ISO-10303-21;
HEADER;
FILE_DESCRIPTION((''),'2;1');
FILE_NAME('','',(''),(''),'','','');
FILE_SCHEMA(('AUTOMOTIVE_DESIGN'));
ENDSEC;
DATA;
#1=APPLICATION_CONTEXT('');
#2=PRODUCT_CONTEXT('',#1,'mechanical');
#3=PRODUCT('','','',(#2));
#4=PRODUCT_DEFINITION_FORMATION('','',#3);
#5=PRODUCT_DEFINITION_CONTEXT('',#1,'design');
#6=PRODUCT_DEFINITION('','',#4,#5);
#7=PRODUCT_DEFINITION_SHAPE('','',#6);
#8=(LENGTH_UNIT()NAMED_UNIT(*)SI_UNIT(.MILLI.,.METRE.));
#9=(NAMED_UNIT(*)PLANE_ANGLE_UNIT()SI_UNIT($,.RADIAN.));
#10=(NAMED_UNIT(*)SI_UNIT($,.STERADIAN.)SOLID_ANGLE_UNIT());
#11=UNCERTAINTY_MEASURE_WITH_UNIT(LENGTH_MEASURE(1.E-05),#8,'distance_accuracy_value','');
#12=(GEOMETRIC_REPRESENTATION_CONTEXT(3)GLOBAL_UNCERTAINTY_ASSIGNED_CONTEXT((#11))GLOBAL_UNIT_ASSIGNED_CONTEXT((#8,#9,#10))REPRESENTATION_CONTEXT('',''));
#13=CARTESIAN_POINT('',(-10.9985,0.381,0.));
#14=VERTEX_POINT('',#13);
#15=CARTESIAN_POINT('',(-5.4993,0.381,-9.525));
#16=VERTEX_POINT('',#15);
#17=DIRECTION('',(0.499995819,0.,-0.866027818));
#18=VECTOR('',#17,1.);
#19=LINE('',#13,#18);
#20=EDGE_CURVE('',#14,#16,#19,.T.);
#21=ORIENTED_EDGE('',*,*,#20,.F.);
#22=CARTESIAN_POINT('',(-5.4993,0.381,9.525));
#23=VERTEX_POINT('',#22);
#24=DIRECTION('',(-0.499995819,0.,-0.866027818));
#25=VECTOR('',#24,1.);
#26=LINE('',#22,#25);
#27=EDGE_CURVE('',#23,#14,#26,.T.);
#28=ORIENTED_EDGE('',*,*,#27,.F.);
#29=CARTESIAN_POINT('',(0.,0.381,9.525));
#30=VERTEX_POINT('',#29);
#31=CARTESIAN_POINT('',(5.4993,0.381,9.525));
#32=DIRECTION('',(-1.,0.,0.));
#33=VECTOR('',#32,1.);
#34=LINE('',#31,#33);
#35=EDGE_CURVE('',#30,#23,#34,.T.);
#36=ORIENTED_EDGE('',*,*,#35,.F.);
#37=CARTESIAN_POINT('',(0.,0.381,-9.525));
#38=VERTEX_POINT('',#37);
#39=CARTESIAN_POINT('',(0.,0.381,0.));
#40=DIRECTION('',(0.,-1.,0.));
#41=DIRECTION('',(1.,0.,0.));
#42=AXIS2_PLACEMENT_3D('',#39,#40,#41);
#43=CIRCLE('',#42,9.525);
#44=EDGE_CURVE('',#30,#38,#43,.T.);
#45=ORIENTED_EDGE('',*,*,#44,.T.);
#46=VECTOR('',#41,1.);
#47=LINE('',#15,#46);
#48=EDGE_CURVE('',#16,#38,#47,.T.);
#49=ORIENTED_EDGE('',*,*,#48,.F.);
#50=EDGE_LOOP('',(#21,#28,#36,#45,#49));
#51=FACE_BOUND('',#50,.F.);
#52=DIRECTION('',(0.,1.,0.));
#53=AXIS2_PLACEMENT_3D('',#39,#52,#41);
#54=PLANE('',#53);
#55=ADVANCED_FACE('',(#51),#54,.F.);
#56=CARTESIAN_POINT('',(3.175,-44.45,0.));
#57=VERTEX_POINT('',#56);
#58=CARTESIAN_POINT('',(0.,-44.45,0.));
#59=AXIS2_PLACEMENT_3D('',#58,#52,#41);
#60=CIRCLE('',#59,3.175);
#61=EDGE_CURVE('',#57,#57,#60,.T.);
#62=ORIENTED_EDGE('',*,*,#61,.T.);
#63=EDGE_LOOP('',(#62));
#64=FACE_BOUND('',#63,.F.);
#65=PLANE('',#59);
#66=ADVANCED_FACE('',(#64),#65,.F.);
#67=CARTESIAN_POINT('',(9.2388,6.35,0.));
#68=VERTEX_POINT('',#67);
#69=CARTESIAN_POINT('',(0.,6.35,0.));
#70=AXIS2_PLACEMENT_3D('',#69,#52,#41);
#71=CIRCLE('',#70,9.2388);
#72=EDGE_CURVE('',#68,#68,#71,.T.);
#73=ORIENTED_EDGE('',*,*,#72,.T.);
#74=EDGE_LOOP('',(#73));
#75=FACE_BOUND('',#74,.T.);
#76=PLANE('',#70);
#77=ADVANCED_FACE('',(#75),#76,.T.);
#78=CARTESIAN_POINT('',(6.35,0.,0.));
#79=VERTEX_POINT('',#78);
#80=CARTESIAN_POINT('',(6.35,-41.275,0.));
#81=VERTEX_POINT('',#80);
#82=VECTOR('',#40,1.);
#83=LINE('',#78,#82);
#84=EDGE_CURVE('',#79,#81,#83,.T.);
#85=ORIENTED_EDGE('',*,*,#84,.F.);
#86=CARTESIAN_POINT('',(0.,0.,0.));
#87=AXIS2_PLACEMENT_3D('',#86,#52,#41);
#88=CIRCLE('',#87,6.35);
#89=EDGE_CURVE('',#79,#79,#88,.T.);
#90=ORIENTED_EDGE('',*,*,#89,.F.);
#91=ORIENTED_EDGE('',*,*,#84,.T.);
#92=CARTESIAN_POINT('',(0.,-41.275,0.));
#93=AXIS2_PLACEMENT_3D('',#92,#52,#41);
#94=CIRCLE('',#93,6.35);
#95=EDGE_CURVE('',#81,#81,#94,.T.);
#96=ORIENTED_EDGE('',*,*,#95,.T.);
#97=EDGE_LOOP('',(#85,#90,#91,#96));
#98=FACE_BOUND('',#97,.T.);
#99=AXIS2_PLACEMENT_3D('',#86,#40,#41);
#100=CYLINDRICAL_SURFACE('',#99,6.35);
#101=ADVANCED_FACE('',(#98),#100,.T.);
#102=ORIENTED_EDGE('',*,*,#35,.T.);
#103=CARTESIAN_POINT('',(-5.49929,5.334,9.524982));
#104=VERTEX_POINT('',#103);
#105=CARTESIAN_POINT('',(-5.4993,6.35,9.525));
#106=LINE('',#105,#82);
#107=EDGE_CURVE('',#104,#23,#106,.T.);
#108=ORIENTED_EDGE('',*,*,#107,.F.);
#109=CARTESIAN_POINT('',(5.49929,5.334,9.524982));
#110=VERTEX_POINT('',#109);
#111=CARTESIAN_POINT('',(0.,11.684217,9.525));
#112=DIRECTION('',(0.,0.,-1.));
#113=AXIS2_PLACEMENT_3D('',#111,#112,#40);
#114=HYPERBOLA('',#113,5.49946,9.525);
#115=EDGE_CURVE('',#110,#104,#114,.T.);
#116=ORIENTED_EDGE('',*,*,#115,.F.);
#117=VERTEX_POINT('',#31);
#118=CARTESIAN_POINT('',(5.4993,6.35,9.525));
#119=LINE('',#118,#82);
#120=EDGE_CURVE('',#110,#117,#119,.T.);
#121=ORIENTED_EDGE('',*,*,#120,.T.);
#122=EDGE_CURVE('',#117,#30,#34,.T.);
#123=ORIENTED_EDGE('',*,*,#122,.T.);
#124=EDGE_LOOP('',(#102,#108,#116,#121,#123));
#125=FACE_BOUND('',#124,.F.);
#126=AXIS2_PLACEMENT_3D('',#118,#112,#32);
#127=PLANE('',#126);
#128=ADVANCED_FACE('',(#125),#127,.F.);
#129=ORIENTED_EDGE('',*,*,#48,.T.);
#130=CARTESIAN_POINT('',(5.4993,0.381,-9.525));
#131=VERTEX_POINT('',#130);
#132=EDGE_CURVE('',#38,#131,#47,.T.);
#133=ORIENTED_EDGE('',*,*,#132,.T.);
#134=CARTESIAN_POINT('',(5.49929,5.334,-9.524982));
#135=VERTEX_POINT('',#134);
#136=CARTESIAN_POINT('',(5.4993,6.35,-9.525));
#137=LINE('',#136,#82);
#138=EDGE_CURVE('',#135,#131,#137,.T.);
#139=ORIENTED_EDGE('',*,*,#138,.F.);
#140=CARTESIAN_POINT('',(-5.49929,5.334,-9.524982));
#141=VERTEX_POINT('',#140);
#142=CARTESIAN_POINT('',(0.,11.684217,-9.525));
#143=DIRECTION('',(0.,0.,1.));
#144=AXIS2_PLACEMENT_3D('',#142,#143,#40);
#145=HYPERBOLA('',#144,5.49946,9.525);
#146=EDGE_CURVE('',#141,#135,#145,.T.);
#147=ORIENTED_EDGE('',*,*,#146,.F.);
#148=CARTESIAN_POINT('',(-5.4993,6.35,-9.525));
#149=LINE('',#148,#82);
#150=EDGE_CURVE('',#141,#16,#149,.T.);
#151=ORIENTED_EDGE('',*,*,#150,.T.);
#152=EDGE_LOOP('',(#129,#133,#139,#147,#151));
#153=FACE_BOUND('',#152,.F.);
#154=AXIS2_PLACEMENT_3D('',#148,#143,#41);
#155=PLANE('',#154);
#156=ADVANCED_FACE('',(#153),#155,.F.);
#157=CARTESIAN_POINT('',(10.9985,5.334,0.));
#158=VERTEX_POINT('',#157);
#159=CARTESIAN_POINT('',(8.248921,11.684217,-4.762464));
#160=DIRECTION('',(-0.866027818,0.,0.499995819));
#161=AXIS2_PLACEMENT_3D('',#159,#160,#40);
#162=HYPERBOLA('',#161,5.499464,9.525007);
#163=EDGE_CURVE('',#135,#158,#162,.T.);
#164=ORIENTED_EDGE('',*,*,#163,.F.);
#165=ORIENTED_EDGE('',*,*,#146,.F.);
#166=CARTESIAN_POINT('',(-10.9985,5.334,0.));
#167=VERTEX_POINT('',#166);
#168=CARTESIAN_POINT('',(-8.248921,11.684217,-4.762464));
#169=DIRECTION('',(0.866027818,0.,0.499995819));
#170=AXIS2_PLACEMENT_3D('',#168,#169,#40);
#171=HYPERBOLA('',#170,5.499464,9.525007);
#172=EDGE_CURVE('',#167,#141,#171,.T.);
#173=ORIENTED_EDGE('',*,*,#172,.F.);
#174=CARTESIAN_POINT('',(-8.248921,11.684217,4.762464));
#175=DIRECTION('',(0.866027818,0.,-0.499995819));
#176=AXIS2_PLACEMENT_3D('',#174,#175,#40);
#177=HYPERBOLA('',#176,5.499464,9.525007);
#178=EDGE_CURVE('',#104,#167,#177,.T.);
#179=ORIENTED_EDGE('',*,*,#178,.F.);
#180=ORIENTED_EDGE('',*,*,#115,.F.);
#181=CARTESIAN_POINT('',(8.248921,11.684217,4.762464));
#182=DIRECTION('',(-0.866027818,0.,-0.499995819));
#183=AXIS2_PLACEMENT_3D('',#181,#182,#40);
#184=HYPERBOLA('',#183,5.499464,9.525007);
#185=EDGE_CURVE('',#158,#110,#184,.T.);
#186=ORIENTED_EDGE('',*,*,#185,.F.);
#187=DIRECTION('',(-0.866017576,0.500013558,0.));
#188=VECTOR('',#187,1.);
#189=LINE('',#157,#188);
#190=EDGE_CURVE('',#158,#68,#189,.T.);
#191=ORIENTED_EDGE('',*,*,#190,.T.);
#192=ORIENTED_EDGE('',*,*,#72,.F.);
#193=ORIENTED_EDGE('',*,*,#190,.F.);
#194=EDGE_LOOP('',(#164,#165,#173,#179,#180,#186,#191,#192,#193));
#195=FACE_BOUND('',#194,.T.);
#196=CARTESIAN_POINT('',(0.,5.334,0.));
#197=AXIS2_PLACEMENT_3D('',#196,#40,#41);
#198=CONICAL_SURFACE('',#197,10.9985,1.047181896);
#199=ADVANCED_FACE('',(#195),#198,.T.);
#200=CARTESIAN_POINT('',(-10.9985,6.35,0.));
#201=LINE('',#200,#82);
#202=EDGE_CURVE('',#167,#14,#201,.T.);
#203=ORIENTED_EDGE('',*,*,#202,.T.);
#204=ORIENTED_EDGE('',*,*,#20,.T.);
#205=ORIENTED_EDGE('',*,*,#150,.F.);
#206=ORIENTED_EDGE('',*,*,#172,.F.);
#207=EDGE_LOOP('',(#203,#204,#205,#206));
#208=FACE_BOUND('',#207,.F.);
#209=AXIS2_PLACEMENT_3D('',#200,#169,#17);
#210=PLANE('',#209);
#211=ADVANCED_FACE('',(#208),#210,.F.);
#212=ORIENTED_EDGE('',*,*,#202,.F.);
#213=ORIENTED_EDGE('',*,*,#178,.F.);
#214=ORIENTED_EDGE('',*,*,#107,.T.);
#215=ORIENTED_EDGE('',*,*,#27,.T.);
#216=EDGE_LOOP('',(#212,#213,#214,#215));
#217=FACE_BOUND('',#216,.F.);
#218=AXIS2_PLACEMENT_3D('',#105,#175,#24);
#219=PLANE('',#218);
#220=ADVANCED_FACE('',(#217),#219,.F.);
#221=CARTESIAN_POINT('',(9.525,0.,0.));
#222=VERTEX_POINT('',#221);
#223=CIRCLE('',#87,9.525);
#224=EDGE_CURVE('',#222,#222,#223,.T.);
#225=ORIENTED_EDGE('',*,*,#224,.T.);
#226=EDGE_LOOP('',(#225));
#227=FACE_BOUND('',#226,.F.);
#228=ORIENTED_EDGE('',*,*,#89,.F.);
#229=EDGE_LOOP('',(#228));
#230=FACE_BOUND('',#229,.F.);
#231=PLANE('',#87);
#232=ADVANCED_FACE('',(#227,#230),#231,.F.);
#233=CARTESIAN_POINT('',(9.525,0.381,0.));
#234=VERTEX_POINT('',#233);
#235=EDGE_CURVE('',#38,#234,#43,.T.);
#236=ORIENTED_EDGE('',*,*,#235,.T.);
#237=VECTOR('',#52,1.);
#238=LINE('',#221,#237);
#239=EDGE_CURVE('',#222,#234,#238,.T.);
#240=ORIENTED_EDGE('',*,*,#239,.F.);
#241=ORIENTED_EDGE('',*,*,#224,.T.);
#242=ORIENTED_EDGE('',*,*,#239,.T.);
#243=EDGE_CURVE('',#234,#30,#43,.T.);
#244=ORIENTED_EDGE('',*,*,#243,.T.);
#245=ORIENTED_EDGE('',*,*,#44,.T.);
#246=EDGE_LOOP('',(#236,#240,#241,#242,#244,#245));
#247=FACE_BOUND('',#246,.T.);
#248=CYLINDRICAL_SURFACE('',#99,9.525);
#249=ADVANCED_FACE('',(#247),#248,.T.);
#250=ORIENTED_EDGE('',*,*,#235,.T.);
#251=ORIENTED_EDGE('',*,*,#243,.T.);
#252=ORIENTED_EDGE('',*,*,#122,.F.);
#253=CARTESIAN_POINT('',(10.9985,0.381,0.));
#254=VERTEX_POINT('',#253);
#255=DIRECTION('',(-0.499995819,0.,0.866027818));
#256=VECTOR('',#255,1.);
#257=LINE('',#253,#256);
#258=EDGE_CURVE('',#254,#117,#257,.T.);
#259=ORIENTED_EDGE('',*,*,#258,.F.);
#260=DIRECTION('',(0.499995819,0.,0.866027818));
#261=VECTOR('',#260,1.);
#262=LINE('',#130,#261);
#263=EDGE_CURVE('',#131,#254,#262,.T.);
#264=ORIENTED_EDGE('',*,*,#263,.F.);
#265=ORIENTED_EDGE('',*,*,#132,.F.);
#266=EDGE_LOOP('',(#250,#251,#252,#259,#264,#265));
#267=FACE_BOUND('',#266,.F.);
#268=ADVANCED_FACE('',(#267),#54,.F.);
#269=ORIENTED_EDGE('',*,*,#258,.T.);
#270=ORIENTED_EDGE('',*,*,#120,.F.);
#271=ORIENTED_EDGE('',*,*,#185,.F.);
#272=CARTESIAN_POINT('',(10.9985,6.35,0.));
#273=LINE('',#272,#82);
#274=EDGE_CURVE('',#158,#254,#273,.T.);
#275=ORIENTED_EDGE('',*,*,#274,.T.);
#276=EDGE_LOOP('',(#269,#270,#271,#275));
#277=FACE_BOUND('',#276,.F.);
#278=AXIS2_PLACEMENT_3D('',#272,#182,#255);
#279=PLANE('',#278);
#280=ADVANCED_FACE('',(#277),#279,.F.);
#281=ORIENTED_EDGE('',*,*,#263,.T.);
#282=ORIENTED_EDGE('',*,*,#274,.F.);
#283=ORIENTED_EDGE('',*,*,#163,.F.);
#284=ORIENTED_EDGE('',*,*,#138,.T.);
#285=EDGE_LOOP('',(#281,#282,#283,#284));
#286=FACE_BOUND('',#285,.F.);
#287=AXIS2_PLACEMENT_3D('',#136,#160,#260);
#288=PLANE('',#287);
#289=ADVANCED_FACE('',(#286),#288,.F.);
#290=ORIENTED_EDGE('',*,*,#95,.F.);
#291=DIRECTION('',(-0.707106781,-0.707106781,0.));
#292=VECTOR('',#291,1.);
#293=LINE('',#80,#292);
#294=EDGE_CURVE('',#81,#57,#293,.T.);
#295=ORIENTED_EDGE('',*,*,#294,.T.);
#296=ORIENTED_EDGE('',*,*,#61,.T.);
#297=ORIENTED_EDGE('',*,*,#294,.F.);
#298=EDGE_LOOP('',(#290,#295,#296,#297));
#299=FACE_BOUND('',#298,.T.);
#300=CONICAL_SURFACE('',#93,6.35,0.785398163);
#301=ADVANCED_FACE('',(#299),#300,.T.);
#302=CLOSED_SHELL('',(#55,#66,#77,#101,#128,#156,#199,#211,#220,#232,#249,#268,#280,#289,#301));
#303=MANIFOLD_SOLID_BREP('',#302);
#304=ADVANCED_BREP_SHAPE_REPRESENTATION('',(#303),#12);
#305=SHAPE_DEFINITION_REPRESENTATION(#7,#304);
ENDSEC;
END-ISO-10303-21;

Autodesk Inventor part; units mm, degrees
ref_plane "YZ Plane" through (0, 0, 0) normal (1, 0, 0) x (0, 1, 0)
ref_plane "XZ Plane" through (0, 0, 0) normal (0, 1, 0) x (-1, 0, 0)
ref_plane "XY Plane" through (0, 0, 0) normal (0, 0, 1) x (1, 0, 0)
sketch "Sketch1" plane through (0, 0, 0) normal (0, 0, 1) x (1, 0, 0)
  line L0 (0, 0) -> (6.35, 0)
  line L1 (6.35, 0) -> (6.35, -44.45)
  line L2 (6.35, -44.45) -> (0, -44.45)
  line L3 (0, -44.45) -> (0, 0)
  dimension "d0" = 12.7
  dimension "d1" = 44.45
revolve "Revolution1" add sketch "Sketch1" angle 360 about axis through (0, -44.45, 0) along (0, 1, 0)
chamfer "Chamfer1" distance 3.175 angle 45 1 edges at (-6.35, -44.45, 0)
sketch "Sketch2" plane through (0, 0, 0) normal (0, 1, 0) x (1, 0, 0)
  circle A0 centre (0, 0) radius 9.525
  point P0 (0, 0)
  dimension "d6" = 19.05
extrude "Extrusion1" add sketch "Sketch2" along normal blind 6.35
sketch "Sketch3" plane through (0, 6.35, 0) normal (0, 1, 0) x (1, 0, 0)
  line L0 (10.9985, 0) -> (5.4993, -9.525)
  line L1 (5.4993, -9.525) -> (-5.4993, -9.525)
  line L2 (-5.4993, -9.525) -> (-10.9985, 0)
  line L3 (-10.9985, 0) -> (-5.4993, 9.525)
  line L4 (-5.4993, 9.525) -> (5.4993, 9.525)
  line L5 (5.4993, 9.525) -> (10.9985, 0)
  circle A0 centre (0, 0) radius 9.525 construction
  point P0 (0, 0)
  point P1 (0, 0)
extrude "Extrusion2" add sketch "Sketch3" against normal blind 5.969
sketch "Sketch4" plane through (0, 0, 0) normal (0, 0, 1) x (1, 0, 0)
  line L0 (9.2388, 6.35) -> (10.9985, 6.35)
  line L1 (10.9985, 6.35) -> (10.9985, 5.334)
  line L2 (10.9985, 5.334) -> (9.2388, 6.35)
  line L3 (0, -1.5875) -> (0, 9.525) projected
  line L4 (5.4993, 0) -> (10.9985, 0) construction
  line L5 (5.4993, 6.35) -> (10.9985, 6.35) construction
  line L6 (5.4993, 6.35) -> (5.4993, 0.381) construction
  line L7 (10.9985, 6.35) -> (10.9985, 0.381) construction
  line L8 (10.9985, 6.35) -> (5.4993, 6.35) projected
  line L9 (8.2489, 0.381) -> (10.9985, 0.381) projected
  line L10 (5.4993, 0.381) -> (8.2489, 0.381) projected
  point P0 (0, 0)
  point P1 (16.2522, 7.9375)
  dimension "d11" = 30
  dimension "d17" = 1.016
revolve "Revolution2" cut sketch "Sketch4" angle 360 about axis through (0, -10, 0) along (0, 1, 0)
thread "Thread3" size "1/2-13 UNC" class "2A" standard "ANSI Unified Screw Threads" full length
equation "\"diameter\" = 1.8542"
equation "\"length\" = 19.05"
properties part number "Door Hinge Pin" material "Steel, Carbon"
